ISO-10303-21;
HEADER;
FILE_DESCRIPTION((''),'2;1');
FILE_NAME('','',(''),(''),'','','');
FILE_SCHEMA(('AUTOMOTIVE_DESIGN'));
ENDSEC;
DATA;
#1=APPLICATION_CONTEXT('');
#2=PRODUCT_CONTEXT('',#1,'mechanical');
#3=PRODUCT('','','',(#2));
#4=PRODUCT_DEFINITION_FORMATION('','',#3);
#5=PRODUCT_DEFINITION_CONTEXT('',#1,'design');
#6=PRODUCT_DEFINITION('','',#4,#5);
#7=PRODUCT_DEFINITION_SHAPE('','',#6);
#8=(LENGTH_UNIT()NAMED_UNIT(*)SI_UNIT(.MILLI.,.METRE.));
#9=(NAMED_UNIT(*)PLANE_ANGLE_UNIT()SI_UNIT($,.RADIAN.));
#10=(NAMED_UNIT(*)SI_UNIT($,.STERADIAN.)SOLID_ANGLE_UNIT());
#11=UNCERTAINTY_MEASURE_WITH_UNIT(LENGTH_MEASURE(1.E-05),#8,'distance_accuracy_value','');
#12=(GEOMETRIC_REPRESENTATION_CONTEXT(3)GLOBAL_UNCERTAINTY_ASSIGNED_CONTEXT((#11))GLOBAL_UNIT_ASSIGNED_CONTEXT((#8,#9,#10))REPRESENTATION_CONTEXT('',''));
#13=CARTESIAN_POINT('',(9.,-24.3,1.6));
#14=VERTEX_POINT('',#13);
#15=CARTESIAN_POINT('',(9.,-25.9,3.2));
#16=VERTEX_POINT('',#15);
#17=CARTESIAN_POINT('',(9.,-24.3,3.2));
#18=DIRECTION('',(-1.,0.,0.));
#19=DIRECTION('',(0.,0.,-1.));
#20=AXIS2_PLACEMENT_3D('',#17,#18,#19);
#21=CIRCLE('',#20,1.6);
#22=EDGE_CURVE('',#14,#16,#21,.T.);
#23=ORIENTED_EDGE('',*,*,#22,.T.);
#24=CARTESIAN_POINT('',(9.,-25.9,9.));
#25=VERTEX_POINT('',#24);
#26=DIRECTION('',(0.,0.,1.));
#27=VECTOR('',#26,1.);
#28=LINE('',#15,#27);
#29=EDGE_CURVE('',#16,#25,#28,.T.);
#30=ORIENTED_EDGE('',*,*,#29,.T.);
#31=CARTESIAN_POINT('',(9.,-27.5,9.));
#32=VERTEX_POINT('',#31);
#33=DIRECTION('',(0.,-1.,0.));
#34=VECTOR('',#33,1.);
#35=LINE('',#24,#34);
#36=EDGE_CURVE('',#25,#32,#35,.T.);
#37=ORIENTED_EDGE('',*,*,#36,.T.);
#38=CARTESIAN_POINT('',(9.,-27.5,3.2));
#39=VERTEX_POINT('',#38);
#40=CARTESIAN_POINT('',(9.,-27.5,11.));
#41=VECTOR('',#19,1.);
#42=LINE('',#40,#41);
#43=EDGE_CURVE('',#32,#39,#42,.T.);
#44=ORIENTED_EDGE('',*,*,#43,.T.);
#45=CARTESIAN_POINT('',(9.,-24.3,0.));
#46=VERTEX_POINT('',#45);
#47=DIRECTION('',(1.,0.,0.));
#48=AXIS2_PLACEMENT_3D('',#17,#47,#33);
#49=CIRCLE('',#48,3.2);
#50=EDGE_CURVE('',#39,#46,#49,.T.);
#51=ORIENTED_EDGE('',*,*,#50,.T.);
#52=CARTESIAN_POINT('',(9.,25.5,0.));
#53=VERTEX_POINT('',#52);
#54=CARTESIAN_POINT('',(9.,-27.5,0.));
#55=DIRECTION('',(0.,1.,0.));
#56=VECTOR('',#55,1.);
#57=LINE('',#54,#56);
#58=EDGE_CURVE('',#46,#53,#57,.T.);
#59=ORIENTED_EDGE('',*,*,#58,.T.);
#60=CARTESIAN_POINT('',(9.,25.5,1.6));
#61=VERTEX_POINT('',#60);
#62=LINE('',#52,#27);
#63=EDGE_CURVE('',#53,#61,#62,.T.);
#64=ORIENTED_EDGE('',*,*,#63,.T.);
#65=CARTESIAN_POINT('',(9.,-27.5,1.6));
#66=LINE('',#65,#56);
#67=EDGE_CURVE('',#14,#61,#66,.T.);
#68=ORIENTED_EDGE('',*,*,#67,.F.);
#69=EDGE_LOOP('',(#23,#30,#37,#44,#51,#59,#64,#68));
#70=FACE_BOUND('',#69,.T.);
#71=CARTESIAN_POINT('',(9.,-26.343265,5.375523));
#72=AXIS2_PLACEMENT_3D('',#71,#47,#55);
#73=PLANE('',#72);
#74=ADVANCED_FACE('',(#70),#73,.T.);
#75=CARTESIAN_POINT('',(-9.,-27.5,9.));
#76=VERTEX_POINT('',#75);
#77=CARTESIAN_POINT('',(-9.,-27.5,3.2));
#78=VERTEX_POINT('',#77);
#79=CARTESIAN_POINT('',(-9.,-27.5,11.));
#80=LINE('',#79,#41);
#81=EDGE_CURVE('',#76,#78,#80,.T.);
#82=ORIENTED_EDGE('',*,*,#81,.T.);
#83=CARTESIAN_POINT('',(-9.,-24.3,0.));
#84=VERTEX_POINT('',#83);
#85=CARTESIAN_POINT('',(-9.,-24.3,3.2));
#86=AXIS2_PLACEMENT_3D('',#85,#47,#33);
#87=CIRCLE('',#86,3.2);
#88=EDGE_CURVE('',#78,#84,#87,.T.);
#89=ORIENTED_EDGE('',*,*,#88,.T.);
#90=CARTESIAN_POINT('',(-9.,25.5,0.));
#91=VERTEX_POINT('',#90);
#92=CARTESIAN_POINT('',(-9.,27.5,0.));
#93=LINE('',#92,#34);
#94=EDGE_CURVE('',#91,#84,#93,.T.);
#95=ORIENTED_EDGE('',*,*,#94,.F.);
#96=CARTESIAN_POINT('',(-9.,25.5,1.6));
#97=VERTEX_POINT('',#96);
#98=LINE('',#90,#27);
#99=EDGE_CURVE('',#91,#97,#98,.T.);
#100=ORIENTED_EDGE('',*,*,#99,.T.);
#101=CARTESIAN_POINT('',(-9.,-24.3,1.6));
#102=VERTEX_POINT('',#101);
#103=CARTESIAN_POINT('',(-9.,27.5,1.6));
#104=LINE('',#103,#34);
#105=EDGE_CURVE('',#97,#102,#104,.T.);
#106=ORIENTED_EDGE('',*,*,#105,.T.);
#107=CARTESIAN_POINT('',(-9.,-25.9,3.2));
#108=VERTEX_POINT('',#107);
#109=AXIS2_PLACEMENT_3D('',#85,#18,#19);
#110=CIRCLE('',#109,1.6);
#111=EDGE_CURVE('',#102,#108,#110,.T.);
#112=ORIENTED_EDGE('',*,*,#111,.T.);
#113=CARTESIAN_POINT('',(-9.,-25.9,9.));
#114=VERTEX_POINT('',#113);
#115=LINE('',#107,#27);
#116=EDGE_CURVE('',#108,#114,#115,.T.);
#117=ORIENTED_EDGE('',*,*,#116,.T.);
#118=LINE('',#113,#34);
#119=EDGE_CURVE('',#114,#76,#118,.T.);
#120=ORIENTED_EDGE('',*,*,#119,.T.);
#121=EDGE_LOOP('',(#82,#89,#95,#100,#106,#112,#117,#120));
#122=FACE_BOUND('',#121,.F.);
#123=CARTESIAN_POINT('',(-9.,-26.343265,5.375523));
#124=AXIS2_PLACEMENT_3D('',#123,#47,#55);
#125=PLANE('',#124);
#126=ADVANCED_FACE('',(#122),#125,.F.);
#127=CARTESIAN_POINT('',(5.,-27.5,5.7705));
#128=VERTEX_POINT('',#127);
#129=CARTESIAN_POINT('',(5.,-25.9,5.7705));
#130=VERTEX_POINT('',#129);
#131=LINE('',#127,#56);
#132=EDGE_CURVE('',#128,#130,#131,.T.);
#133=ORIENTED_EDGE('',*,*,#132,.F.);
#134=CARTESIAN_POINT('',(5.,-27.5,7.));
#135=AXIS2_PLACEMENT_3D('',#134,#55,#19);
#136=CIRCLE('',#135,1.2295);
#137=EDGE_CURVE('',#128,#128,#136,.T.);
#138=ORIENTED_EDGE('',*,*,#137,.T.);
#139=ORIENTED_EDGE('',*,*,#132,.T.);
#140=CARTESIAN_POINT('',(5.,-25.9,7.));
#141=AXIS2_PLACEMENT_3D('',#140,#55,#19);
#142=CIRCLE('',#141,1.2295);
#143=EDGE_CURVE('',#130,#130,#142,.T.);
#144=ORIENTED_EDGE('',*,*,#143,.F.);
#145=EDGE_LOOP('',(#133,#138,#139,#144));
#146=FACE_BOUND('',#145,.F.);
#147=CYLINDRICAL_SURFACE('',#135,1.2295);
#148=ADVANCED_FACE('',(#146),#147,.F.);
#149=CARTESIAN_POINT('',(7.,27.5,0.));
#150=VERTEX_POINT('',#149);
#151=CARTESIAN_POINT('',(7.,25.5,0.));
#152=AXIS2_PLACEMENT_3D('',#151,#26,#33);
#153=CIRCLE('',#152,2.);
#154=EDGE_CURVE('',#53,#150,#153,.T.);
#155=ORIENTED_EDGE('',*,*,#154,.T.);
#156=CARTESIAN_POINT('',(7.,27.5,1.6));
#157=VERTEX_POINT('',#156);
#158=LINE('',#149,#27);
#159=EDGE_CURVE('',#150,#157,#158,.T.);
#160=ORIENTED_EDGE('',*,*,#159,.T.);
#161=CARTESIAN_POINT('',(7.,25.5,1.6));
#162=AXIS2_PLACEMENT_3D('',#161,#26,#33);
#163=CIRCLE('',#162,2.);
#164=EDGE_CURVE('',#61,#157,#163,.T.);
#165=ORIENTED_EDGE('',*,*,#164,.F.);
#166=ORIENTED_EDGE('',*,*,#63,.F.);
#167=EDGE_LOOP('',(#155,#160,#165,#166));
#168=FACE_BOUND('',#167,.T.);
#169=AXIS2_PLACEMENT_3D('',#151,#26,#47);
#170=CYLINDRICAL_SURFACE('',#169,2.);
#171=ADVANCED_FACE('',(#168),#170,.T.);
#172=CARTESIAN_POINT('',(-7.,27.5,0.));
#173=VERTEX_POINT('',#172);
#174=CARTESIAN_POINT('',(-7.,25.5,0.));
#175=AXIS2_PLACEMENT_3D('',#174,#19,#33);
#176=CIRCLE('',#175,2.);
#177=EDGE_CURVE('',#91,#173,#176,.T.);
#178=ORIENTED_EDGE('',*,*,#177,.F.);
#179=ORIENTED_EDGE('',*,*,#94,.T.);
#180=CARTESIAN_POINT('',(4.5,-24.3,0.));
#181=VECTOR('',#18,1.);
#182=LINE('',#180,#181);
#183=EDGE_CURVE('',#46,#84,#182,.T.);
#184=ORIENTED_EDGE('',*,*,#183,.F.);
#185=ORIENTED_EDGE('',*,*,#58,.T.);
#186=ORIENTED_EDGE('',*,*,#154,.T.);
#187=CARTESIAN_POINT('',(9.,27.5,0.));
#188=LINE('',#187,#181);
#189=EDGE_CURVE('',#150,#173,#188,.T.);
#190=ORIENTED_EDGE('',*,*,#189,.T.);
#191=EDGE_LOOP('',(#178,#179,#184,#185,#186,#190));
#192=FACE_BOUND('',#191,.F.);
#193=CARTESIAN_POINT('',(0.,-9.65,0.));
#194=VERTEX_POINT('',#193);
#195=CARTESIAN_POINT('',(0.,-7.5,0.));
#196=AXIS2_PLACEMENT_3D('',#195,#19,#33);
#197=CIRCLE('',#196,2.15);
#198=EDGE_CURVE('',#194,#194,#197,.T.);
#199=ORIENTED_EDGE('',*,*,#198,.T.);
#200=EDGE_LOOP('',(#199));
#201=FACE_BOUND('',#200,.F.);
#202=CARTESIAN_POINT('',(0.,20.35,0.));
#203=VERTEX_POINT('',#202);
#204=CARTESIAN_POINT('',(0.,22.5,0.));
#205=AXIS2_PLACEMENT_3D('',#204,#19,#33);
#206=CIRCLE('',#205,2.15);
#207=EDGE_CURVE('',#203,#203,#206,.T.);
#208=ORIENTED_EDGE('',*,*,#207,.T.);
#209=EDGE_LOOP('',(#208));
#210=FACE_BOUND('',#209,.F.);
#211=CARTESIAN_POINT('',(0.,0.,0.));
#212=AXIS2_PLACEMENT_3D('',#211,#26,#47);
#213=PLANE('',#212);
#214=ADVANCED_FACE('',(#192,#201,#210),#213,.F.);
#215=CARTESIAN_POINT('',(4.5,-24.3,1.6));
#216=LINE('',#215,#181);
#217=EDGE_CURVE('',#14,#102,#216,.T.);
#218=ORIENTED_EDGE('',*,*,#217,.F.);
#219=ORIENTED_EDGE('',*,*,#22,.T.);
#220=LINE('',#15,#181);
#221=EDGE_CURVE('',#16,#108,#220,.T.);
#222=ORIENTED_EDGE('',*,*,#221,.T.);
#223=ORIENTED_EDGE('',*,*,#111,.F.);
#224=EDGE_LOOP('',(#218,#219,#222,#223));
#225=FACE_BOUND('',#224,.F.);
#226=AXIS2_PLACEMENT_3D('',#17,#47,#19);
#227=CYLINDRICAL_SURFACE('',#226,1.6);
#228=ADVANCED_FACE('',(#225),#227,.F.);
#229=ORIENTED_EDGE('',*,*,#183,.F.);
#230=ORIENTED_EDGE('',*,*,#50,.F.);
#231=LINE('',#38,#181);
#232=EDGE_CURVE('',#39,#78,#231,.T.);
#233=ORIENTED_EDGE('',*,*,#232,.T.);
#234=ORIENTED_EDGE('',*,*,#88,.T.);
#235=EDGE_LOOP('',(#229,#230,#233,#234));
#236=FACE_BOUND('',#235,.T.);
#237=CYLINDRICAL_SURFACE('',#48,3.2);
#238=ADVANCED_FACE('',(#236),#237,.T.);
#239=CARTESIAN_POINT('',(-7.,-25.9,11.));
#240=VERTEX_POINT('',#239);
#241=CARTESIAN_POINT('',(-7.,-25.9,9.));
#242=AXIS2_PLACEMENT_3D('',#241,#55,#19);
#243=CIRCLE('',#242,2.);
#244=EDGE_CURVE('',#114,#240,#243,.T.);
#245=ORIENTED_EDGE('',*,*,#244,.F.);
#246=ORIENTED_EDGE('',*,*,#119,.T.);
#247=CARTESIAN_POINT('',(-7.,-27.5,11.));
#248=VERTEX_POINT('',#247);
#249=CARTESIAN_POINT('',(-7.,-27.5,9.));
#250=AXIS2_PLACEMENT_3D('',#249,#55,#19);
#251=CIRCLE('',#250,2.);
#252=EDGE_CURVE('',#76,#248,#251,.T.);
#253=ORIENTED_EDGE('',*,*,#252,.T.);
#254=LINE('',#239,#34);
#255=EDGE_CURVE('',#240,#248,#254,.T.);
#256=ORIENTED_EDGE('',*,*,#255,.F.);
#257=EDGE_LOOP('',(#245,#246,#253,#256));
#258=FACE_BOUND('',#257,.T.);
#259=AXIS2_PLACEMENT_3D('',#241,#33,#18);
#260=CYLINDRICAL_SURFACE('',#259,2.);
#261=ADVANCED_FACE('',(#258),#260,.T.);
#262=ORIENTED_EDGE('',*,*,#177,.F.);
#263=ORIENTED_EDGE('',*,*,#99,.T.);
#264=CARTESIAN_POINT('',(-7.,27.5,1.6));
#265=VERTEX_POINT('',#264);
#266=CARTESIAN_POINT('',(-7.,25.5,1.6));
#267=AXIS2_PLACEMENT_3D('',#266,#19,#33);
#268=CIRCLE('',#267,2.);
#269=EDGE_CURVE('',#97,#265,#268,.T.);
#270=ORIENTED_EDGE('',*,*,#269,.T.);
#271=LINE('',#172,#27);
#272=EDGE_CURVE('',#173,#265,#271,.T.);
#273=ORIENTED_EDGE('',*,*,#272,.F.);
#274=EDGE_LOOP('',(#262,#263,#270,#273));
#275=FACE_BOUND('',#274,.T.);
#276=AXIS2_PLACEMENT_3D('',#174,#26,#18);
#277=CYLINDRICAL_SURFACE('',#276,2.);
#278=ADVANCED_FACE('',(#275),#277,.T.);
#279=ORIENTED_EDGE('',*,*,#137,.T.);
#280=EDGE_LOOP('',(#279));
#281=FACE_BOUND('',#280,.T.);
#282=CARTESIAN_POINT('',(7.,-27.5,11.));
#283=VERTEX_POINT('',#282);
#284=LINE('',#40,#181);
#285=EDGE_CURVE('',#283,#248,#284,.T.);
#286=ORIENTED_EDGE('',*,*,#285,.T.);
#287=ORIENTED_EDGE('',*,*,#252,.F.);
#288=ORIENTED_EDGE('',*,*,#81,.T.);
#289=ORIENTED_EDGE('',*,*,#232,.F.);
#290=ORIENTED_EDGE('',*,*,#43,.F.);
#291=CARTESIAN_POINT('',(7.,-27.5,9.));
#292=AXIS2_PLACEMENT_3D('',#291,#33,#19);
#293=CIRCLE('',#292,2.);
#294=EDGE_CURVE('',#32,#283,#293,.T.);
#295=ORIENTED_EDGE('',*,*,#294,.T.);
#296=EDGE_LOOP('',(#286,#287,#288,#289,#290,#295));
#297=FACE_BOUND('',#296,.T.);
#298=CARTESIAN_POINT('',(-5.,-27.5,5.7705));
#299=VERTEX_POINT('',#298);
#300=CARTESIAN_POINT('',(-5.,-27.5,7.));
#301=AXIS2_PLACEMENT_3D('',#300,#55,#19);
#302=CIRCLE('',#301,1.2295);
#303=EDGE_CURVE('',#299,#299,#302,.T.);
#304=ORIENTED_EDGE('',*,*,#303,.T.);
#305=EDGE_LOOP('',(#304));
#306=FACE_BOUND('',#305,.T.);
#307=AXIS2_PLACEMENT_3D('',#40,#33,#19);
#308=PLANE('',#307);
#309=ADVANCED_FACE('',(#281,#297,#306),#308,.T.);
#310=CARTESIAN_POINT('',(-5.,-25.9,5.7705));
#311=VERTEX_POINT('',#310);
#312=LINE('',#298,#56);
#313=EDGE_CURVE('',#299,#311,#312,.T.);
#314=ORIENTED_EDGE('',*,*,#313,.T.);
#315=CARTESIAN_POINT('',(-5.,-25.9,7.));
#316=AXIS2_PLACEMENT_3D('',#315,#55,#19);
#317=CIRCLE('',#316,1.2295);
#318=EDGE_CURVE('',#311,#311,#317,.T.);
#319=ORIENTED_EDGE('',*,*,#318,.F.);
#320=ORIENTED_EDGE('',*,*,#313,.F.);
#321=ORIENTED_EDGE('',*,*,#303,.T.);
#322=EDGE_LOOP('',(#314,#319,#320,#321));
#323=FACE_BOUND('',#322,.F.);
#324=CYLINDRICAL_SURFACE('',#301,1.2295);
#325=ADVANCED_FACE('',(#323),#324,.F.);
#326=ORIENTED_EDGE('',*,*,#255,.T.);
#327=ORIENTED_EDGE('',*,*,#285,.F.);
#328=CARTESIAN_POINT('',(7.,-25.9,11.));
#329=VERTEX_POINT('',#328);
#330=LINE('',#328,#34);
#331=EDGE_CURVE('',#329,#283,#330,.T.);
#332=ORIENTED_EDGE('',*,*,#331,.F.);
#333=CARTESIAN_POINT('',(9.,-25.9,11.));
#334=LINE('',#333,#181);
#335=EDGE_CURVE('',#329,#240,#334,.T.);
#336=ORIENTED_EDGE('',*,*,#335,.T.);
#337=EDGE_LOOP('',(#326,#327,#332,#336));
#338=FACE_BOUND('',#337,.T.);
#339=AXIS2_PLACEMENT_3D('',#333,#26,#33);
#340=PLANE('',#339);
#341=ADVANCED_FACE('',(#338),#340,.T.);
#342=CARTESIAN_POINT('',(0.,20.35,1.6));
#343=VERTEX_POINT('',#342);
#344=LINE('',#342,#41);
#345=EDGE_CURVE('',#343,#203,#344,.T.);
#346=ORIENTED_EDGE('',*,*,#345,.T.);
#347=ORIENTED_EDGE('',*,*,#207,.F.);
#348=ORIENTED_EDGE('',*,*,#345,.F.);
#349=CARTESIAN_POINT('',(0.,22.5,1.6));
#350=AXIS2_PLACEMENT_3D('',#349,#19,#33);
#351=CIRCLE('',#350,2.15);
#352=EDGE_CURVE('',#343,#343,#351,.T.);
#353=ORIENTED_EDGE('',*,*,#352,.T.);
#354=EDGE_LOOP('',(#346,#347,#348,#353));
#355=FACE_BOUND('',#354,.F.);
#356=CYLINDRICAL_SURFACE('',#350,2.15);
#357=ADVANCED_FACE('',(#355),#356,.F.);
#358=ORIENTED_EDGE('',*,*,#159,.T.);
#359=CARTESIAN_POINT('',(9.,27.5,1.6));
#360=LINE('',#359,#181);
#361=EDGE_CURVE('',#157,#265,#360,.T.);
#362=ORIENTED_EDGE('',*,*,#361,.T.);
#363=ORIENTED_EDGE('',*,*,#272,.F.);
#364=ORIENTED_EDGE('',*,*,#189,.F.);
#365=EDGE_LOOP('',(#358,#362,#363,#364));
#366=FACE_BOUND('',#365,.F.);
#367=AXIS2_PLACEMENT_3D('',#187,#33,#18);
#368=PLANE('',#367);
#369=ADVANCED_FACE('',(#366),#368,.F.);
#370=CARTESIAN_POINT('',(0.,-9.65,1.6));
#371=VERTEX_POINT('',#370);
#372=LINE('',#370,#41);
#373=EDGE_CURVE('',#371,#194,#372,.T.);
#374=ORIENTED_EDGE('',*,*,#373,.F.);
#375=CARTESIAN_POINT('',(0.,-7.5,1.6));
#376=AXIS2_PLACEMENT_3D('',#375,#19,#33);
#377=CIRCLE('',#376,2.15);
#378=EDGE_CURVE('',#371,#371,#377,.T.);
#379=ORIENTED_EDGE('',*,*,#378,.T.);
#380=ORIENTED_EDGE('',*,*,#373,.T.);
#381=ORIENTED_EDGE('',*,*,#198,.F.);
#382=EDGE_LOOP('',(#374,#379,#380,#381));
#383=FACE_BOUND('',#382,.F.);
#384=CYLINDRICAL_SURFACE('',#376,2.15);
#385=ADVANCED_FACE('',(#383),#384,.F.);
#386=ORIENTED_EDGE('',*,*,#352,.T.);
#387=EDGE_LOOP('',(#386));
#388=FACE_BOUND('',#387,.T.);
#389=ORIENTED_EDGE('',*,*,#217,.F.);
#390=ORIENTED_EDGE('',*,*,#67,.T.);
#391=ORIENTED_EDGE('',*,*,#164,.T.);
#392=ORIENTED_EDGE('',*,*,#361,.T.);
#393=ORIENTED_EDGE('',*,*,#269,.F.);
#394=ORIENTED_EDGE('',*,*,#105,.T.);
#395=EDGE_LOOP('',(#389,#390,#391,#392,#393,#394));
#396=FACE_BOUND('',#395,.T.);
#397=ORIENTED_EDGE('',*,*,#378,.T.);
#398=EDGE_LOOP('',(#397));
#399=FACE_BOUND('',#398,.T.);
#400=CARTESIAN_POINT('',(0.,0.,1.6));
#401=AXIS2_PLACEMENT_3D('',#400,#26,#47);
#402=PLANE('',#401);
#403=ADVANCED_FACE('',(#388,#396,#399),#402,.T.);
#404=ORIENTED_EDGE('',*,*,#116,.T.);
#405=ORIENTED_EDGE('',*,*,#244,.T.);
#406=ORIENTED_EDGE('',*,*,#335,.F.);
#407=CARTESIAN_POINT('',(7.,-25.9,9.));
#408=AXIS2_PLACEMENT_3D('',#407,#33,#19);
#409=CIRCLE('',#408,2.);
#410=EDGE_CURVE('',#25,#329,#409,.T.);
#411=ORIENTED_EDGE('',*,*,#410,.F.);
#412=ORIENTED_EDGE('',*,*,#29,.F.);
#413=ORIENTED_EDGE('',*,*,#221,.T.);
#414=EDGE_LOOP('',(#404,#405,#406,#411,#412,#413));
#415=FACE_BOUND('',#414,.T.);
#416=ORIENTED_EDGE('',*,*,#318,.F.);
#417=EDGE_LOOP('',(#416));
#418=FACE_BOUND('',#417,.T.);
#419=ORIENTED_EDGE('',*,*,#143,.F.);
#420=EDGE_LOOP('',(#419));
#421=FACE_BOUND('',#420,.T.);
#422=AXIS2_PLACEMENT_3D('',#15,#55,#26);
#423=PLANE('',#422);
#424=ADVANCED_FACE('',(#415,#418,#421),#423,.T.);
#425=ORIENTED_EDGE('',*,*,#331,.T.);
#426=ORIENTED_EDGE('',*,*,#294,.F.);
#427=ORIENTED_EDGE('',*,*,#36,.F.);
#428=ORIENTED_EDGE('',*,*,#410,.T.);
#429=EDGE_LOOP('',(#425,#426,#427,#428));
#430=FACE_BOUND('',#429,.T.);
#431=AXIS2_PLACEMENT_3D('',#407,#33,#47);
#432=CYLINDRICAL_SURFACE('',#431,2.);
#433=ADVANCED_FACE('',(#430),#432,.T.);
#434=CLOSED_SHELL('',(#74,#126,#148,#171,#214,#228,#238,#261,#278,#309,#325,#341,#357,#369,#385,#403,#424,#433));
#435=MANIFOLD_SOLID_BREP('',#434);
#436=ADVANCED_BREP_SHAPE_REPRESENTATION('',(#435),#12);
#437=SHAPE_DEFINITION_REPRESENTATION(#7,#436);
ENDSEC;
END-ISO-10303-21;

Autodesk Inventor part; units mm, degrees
ref_plane "YZ Plane" through (0, 0, 0) normal (1, 0, 0) x (0, 1, 0)
ref_plane "XZ Plane" through (0, 0, 0) normal (0, 1, 0) x (-1, 0, 0)
ref_plane "XY Plane" through (0, 0, 0) normal (0, 0, 1) x (1, 0, 0)
sketch "スケッチ1" plane through (0, 0, 0) normal (0, 0, 1) x (1, 0, 0)
  line L0 (-9, -27.5) -> (9, -27.5)
  line L1 (9, -27.5) -> (9, 27.5)
  line L2 (9, 27.5) -> (-9, 27.5)
  line L3 (-9, 27.5) -> (-9, -27.5)
  line L4 (-9, -27.5) -> (9, 27.5) construction
  line L5 (9, -27.5) -> (-9, 27.5) construction
  point P0 (0, 0)
  dimension "d0" = 18
  dimension "d1" = 55
extrude "プレート1" add sketch "スケッチ1" along normal blind 1.6
sketch "スケッチ2" plane through (9, -25.9, 0) normal (0, -1, 0) x (1, 0, 0)
  line L0 (-18, 0) -> (0, 0)
  line L1 (0, 0) -> (0, 11)
  line L2 (0, 11) -> (-18, 11)
  line L3 (-18, 11) -> (-18, 0)
edge flange "フランジ1" height 11 angle 90 thickness 1.6 bend radius 1.6 thickness toward (0, -1, 0) relief tear relief width 1.6 relief depth 0.8 edges at (0, -27.5, 1.6) wall of the first edge with corners at (-9, -25.9, 0) (9, -25.9, 0) (9, -25.9, 11) (-9, -25.9, 11)
bend "曲げ1"
corner "コーナー1"
sketch "スケッチ3" plane through (0, 0, 1.6) normal (0, 0, 1) x (1, 0, 0)
  line L0 (-9, 27.5) -> (9, 27.5) projected
  point P0 (0, 0)
  point P1 (0, 22.5)
  point P2 (0, -7.5)
  dimension "d13" = 5
  dimension "d14" = 30
hole "穴1" at (0, 22.5, 1.6) at (0, -7.5, 1.6) direction (0, 0, -1) diameter 4.3 end through all clearance for "Flat Head Machine Screw" size "M4" standard "Ansi Metric M Profile"
sketch "スケッチ4" plane through (-9, -27.5, 11) normal (0, -1, 0) x (1, 0, 0)
  line L0 (0, 0) -> (18, 0) projected
  line L1 (18, 0) -> (18, -7.8) projected
  line L2 (0, -7.8) -> (0, 0) projected
  point P0 (9, -11)
  point P1 (14, -4)
  point P2 (4, -4)
  dimension "d22" = 4
  dimension "d40" = 4
  dimension "d41" = 4
hole "穴2" at (5, -27.5, 7) at (-5, -27.5, 7) direction (0, 1, 0) diameter 2.459 end through all thread size "M3x0.5" class "6H" standard "ANSI Metric M Profile"
fillet "コーナーR1" radius 2 3 edges at (9, -26.7, 11) (-9, 27.5, 0.8) (9, 27.5, 0.8)
fillet "コーナーR2" radius 2 1 edges at (-9, -26.7, 11)
equation "\"d20\" = Thickness"
equation "\"d30\" = Thickness"
equation "\"d2\" = Thickness"
equation "\"d3\" = BendReliefWidth"
equation "\"d4\" = BendReliefDepth"
equation "\"d5\" = MinimumRemnant"
equation "\"d6\" = TransitionRadius"
equation "\"d9\" = BendRadius"
equation "\"d10\" = CornerReliefSize"
equation "\"d11\" = GapSize"
equation "\"d12\" = JacobiRadiusSize"
equation "\"BendRadius\" = Thickness"
equation "\"BendReliefWidth\" = Thickness"
equation "\"BendReliefDepth\" = 0.5 * Thickness"
equation "\"CornerReliefSize\" = 4 * Thickness"
equation "\"MinimumRemnant\" = 2 * Thickness"
equation "\"TransitionRadius\" = BendRadius"
equation "\"JacobiRadiusSize\" = BendRadius"
equation "\"GapSize\" = Thickness"
equation "\"Thickness\" = 1.6"
properties part number "steel_plate7" material "鋼、炭素鋼"
